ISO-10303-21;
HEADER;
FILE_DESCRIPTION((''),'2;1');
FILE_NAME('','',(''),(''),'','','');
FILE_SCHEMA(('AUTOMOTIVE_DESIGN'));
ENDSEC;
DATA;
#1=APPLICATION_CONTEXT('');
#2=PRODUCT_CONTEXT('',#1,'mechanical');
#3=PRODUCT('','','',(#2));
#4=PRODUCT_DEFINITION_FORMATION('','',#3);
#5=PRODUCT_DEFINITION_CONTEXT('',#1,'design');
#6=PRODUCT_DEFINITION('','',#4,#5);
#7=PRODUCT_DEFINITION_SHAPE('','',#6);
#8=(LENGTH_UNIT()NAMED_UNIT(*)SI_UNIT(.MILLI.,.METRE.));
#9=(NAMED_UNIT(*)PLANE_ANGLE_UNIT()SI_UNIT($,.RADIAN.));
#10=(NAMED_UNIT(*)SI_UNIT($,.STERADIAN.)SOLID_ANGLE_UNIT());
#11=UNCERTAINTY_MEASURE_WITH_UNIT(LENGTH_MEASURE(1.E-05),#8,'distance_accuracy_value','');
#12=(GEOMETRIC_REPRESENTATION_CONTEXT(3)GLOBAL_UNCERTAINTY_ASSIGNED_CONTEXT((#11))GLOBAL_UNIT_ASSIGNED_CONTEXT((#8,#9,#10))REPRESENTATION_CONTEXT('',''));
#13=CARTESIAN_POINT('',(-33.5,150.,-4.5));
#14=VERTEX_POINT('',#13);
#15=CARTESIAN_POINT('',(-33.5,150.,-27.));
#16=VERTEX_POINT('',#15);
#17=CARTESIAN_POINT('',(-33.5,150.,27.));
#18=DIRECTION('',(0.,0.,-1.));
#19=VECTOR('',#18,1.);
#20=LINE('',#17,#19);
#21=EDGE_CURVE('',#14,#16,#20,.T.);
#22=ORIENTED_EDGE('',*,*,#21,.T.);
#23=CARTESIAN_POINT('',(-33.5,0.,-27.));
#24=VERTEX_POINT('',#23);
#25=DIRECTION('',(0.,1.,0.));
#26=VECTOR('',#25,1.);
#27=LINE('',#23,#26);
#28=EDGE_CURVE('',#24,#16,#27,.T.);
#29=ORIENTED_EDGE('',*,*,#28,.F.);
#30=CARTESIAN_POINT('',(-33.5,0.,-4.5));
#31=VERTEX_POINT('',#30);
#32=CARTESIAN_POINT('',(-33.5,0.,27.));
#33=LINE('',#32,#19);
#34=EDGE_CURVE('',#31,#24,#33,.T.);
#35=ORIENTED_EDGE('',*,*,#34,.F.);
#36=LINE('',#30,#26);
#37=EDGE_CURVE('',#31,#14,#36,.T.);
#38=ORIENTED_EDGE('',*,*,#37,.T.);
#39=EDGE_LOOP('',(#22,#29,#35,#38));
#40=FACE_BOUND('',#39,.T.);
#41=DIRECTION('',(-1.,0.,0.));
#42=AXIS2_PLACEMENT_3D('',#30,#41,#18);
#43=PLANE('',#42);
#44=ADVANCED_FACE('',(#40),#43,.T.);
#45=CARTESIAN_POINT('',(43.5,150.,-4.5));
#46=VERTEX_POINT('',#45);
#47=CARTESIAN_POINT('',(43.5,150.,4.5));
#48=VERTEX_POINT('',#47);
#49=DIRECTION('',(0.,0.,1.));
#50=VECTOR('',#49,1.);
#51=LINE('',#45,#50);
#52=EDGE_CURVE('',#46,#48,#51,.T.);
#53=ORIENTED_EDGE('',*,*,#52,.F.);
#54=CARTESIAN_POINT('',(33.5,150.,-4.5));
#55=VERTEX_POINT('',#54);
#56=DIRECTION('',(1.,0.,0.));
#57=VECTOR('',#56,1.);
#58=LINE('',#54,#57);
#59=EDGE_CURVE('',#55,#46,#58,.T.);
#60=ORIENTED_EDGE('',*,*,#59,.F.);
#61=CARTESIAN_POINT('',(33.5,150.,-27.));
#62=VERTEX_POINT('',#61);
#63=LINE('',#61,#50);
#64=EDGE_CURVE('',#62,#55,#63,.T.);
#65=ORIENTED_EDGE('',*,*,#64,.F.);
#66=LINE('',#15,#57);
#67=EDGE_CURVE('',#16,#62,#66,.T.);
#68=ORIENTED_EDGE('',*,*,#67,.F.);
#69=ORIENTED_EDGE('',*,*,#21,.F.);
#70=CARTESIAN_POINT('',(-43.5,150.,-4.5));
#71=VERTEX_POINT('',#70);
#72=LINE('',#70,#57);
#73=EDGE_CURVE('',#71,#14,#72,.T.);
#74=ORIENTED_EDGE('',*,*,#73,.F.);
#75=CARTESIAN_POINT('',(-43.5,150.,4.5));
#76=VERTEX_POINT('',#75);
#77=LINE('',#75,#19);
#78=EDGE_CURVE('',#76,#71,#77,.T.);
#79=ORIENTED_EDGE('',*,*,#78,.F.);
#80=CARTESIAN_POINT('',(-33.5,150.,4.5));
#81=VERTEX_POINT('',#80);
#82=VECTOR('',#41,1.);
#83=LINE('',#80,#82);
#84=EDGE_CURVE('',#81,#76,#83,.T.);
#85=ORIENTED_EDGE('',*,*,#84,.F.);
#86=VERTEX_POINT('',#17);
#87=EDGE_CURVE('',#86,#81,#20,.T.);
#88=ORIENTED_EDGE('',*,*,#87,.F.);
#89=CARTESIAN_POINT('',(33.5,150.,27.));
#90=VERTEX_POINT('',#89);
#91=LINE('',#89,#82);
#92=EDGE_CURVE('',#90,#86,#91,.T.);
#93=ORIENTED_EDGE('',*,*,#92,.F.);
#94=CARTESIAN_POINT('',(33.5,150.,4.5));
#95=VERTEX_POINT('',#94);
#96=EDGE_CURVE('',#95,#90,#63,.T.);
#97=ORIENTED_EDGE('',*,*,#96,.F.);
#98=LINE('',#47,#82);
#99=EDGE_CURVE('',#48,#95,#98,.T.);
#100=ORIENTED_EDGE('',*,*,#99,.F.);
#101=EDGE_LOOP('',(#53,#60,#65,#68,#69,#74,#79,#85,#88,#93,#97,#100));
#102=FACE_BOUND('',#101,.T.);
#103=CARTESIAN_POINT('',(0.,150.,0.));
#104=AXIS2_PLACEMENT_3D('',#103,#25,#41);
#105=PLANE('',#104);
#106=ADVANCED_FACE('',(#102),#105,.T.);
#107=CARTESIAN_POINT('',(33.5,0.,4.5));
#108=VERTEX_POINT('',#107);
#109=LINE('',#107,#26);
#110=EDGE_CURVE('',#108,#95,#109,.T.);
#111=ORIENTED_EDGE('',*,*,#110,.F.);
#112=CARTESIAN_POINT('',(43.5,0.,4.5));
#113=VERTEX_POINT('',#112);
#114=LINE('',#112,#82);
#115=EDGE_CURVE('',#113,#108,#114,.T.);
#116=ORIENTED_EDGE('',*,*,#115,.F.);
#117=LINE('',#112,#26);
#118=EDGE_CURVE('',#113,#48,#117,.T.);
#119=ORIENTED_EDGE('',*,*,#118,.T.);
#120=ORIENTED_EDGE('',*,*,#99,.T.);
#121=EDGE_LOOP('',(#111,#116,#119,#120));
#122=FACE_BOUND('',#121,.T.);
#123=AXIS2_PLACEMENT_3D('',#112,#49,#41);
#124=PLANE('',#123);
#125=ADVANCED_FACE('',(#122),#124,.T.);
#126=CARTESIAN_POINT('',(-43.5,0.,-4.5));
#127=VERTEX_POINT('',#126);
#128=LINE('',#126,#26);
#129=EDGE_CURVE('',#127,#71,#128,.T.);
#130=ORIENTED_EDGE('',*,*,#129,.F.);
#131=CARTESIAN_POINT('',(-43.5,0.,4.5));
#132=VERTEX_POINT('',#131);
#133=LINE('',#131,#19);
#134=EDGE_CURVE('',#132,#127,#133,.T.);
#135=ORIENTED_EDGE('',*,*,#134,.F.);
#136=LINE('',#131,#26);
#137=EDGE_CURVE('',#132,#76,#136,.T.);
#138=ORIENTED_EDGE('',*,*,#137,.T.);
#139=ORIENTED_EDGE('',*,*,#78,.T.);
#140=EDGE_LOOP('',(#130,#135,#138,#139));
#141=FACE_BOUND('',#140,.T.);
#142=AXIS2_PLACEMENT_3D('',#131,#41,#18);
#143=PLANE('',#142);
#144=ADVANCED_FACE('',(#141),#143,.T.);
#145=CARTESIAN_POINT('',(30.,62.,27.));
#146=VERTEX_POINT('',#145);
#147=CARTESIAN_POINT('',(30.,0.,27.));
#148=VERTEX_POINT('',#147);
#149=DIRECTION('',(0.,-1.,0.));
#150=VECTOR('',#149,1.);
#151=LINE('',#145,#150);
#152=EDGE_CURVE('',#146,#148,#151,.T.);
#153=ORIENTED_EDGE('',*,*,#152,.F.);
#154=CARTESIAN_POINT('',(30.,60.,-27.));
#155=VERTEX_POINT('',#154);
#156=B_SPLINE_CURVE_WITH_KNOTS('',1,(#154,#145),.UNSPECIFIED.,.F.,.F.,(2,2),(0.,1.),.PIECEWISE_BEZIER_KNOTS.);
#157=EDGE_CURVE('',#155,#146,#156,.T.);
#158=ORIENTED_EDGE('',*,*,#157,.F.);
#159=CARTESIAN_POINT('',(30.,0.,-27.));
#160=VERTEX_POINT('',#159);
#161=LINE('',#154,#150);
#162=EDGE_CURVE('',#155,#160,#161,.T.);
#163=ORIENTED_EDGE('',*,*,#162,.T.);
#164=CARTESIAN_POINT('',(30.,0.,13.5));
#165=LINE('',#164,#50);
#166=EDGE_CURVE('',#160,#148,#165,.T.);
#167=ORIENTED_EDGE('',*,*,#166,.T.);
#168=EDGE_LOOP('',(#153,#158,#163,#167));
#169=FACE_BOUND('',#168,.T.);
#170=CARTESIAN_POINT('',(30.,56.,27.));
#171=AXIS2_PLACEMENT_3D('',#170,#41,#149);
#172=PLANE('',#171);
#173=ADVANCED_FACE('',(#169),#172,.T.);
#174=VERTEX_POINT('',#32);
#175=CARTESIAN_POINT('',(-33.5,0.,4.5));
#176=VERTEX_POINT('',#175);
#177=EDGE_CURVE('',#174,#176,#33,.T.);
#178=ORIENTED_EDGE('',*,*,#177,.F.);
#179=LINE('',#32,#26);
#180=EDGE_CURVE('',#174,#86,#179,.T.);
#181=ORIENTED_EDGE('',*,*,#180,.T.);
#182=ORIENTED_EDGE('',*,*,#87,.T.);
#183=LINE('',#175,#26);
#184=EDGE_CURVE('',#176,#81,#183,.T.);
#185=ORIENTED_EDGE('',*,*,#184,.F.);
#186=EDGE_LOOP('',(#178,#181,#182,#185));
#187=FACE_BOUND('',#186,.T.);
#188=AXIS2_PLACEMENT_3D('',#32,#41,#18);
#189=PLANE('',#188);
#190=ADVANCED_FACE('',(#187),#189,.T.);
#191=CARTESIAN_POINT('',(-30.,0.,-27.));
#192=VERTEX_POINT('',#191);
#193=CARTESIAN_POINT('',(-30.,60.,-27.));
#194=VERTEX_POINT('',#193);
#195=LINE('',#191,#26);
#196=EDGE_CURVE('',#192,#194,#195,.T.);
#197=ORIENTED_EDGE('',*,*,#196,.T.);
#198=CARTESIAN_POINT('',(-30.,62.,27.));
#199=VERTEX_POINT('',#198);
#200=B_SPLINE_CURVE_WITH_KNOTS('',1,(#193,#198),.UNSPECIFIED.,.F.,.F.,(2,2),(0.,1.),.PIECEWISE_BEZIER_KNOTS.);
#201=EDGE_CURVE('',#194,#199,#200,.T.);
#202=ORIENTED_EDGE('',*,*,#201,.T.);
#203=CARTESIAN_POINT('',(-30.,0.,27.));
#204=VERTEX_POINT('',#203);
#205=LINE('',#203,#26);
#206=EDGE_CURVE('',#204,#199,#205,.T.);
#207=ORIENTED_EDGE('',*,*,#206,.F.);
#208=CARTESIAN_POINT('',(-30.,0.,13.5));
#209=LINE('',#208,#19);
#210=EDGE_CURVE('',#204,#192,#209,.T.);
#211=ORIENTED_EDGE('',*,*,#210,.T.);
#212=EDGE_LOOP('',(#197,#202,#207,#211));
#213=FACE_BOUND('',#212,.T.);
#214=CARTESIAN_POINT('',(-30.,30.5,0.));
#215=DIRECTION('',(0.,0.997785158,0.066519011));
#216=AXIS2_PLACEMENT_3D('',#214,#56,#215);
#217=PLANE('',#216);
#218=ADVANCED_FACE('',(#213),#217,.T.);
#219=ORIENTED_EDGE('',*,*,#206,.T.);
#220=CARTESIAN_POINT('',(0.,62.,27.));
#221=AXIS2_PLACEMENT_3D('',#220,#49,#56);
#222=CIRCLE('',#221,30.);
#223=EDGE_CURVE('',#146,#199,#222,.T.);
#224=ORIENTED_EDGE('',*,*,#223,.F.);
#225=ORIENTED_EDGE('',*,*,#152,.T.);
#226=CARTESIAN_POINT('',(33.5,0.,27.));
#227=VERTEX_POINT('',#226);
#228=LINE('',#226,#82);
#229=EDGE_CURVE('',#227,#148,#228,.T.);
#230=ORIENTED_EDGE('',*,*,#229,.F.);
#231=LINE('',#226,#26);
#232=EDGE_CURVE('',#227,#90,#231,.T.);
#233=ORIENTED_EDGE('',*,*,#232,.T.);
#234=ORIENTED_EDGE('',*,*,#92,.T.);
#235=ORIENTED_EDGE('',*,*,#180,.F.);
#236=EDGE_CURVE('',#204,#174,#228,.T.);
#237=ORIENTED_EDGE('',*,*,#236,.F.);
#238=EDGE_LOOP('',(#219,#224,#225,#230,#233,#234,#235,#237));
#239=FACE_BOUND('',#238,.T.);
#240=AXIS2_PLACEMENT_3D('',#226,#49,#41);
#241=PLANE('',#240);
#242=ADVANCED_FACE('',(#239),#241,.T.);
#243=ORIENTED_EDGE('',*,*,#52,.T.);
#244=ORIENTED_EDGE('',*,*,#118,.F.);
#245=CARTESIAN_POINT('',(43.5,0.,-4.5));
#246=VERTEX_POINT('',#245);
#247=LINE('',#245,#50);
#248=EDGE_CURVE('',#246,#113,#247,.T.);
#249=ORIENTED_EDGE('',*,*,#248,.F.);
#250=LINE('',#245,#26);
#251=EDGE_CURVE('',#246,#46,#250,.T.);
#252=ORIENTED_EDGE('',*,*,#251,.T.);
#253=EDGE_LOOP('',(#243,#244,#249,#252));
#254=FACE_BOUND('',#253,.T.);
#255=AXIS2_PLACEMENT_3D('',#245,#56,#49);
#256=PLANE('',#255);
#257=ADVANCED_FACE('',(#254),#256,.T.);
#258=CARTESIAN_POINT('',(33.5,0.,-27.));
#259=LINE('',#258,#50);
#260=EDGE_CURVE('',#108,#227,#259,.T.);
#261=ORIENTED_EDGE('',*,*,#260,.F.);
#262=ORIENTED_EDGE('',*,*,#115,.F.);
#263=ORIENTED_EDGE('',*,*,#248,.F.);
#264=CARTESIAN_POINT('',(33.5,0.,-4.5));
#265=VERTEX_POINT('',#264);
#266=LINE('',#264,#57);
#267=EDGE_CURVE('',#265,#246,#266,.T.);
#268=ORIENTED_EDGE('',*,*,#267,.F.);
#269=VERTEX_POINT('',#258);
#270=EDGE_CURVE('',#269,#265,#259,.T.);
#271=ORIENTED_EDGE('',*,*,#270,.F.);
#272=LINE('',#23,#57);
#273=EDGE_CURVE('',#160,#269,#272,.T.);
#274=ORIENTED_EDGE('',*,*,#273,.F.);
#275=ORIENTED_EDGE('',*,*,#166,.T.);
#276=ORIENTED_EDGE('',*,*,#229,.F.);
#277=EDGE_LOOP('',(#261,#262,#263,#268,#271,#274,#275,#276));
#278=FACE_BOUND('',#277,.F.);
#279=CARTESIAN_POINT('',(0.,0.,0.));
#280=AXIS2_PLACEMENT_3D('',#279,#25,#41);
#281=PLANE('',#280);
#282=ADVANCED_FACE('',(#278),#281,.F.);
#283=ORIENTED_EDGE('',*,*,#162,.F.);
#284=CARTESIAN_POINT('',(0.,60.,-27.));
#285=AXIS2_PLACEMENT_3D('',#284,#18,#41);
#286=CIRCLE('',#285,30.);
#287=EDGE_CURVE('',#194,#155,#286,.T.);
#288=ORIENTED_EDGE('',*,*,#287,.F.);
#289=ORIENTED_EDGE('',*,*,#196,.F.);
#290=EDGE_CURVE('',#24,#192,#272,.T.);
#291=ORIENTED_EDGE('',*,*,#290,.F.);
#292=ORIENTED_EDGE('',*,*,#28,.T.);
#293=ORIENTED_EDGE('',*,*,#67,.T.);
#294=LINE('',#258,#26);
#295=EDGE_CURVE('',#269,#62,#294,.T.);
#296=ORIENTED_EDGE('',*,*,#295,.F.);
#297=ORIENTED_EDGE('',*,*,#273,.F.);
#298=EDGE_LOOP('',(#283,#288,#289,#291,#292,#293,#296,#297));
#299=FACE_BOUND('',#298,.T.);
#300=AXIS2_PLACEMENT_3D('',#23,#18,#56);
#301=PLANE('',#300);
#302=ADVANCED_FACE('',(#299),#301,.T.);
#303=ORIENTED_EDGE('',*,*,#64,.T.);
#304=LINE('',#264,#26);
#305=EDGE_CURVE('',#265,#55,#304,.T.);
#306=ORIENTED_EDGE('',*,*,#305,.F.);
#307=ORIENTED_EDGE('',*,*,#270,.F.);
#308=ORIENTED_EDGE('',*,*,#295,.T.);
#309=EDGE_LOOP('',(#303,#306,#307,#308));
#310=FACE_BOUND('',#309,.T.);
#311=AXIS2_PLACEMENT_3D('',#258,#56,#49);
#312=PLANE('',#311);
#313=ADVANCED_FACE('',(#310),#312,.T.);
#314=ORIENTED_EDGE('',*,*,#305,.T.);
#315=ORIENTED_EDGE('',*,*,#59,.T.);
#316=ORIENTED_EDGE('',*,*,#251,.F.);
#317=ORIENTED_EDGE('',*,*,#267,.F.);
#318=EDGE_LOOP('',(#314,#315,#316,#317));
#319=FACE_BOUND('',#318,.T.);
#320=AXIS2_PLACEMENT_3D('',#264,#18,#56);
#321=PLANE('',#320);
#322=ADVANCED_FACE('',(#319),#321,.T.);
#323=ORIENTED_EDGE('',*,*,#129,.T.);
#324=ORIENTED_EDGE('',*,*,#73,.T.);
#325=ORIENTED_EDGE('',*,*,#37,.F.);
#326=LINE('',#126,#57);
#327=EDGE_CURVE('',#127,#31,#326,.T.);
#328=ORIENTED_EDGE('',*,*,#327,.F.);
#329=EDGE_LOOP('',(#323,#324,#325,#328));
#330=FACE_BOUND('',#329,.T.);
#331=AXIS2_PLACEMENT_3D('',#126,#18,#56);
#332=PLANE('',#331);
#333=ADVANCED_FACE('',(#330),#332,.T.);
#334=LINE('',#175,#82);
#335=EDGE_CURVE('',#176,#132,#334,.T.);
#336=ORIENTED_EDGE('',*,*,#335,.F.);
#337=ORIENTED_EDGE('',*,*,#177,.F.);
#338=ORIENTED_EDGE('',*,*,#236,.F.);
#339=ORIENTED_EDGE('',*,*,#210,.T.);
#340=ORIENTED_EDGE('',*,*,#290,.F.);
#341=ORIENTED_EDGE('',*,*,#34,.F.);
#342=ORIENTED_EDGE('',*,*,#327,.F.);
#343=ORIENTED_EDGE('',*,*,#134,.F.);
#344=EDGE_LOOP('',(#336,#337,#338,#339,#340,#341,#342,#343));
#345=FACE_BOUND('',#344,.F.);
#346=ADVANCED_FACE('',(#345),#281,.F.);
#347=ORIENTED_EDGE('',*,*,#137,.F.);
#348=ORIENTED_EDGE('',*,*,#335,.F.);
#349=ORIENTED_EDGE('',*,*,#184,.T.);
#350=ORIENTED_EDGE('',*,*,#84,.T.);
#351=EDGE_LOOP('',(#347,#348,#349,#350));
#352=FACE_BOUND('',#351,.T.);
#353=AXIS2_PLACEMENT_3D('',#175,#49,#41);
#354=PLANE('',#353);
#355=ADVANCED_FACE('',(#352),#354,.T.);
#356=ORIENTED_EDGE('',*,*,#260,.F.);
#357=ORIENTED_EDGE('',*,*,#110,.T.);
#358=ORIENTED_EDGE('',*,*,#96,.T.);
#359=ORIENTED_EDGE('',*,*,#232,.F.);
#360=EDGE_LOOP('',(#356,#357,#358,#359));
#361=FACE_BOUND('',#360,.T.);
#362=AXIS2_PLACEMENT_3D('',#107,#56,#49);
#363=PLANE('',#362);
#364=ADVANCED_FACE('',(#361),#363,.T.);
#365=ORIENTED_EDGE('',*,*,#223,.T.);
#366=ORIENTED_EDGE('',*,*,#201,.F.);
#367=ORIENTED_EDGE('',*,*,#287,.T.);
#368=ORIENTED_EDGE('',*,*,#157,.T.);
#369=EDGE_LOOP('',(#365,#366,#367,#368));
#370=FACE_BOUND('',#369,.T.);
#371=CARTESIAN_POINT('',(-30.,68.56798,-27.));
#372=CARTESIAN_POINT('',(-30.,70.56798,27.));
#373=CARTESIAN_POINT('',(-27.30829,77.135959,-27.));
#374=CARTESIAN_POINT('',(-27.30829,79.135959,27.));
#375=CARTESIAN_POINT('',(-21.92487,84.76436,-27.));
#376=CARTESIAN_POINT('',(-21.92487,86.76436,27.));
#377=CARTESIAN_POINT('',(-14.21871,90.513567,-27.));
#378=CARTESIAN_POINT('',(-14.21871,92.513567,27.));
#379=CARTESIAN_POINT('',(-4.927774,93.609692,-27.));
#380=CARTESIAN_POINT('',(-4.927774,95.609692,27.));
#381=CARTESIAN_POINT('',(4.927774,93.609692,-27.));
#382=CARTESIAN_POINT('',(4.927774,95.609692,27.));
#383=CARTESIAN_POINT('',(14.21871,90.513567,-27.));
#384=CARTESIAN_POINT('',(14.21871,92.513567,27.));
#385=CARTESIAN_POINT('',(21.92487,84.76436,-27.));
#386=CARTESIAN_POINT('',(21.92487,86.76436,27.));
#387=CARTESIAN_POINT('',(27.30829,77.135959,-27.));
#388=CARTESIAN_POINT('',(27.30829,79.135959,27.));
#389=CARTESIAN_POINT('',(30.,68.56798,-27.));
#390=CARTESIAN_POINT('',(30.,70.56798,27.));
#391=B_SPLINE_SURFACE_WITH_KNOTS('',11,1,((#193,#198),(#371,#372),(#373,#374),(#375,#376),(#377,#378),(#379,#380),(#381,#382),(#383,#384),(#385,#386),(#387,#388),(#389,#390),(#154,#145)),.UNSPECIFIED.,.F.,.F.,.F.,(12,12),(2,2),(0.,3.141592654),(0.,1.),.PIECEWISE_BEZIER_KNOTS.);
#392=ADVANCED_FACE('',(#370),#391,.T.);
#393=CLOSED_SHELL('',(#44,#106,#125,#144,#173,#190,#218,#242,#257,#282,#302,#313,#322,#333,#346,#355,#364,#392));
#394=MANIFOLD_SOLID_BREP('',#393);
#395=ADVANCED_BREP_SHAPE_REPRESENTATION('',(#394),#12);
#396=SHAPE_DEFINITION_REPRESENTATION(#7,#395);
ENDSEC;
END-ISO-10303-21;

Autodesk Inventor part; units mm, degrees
ref_plane "YZ Plane" through (0, 0, 0) normal (1, 0, 0) x (0, 1, 0)
ref_plane "XZ Plane" through (0, 0, 0) normal (0, 1, 0) x (-1, 0, 0)
ref_plane "XY Plane" through (0, 0, 0) normal (0, 0, 1) x (1, 0, 0)
sketch "草圖1" plane through (0, 0, 0) normal (0, 1, 0) x (-1, 0, 0)
  line L0 (-33.5, 27) -> (33.5, 27)
  line L1 (33.5, 27) -> (33.5, -27)
  line L2 (33.5, -27) -> (-33.5, -27)
  line L3 (-33.5, -27) -> (-33.5, 27)
  line L4 (-33.5, 27) -> (33.5, -27) construction
  line L5 (33.5, 27) -> (-33.5, -27) construction
  line L6 (43.5, -4.5) -> (33.5, -4.5)
  line L7 (33.5, -4.5) -> (33.5, 4.5)
  line L8 (33.5, 4.5) -> (43.5, 4.5)
  line L9 (43.5, 4.5) -> (43.5, -4.5)
  line L10 (-33.5, -4.5) -> (-43.5, -4.5)
  line L11 (-43.5, -4.5) -> (-43.5, 4.5)
  line L12 (-43.5, 4.5) -> (-33.5, 4.5)
  line L13 (-33.5, 4.5) -> (-33.5, -4.5)
  point P0 (0, 0)
  point P1 (33.5, 0)
  point P2 (-33.5, 0)
  point P3 (-33.5, 4.5)
  point P4 (-33.5, -4.5)
  dimension "d0" = 67
  dimension "d1" = 54
  dimension "d2" = 9
  dimension "d3" = 10
extrude "擠出1" add sketch "草圖1" along normal blind 150
sketch "草圖2" plane through (-33.5, 0, 27) normal (0, 0, 1) x (1, 0, 0)
  line L0 (0, 0) -> (0, 150) projected
  line L1 (0, 150) -> (67, 150) projected
  line L2 (67, 150) -> (67, 0) projected
  line L3 (67, 0) -> (0, 0) projected
  circle A0 centre (33.5, 56) radius 30
  line L4 (3.5, 56) -> (63.5, 56)
  line L5 (63.5, 56) -> (63.5, -16.9471)
  line L6 (63.5, -16.9471) -> (3.5, -16.9471)
  line L7 (3.5, -16.9471) -> (3.5, 56)
  point P0 (33.5, 0)
  point P1 (33.5, 0)
  point P2 (3.5, 56)
  dimension "d6" = 60
  dimension "d7" = 56
extrude "擠出2" cut sketch "草圖2" against normal through all contours L7 A0 L5 L3 | L3 L5 L6 L7 | L4 A0 | A0 L4
sketch "草圖3" plane through (33.5, 150, -27) normal (0, 0, -1) x (-1, 0, 0)
  arc A0 (63.5, -94) -> (3.5, -94) centre (33.5, -94) ccw construction
  circle A1 centre (33.5, -90) radius 30
  line L0 (63.5, -150) -> (3.5, -150)
  line L1 (3.5, -150) -> (3.5, -90)
  line L2 (3.5, -90) -> (63.5, -90)
  line L3 (63.5, -90) -> (63.5, -150)
  point P0 (33.5, -150)
  point P1 (33.5, -150)
  point P2 (63.5, -150)
  dimension "d10" = 60
  dimension "d11" = 4
sketch "草圖4" plane through (-33.5, 150, 27) normal (0, 0, 1) x (1, 0, 0)
  arc A0 (63.5, -94) -> (3.5, -94) centre (33.5, -94) ccw construction
  circle A1 centre (33.5, -88) radius 30
  line L0 (63.5, -150) -> (3.5, -150)
  line L1 (3.5, -150) -> (3.5, -88)
  line L2 (3.5, -88) -> (63.5, -88)
  line L3 (63.5, -88) -> (63.5, -150)
  point P0 (33.5, -150)
  dimension "d12" = 6
  dimension "d13" = 60
loft "斷面混成1" cut profiles "草圖3", "草圖4"
properties part number "Slider-2"
